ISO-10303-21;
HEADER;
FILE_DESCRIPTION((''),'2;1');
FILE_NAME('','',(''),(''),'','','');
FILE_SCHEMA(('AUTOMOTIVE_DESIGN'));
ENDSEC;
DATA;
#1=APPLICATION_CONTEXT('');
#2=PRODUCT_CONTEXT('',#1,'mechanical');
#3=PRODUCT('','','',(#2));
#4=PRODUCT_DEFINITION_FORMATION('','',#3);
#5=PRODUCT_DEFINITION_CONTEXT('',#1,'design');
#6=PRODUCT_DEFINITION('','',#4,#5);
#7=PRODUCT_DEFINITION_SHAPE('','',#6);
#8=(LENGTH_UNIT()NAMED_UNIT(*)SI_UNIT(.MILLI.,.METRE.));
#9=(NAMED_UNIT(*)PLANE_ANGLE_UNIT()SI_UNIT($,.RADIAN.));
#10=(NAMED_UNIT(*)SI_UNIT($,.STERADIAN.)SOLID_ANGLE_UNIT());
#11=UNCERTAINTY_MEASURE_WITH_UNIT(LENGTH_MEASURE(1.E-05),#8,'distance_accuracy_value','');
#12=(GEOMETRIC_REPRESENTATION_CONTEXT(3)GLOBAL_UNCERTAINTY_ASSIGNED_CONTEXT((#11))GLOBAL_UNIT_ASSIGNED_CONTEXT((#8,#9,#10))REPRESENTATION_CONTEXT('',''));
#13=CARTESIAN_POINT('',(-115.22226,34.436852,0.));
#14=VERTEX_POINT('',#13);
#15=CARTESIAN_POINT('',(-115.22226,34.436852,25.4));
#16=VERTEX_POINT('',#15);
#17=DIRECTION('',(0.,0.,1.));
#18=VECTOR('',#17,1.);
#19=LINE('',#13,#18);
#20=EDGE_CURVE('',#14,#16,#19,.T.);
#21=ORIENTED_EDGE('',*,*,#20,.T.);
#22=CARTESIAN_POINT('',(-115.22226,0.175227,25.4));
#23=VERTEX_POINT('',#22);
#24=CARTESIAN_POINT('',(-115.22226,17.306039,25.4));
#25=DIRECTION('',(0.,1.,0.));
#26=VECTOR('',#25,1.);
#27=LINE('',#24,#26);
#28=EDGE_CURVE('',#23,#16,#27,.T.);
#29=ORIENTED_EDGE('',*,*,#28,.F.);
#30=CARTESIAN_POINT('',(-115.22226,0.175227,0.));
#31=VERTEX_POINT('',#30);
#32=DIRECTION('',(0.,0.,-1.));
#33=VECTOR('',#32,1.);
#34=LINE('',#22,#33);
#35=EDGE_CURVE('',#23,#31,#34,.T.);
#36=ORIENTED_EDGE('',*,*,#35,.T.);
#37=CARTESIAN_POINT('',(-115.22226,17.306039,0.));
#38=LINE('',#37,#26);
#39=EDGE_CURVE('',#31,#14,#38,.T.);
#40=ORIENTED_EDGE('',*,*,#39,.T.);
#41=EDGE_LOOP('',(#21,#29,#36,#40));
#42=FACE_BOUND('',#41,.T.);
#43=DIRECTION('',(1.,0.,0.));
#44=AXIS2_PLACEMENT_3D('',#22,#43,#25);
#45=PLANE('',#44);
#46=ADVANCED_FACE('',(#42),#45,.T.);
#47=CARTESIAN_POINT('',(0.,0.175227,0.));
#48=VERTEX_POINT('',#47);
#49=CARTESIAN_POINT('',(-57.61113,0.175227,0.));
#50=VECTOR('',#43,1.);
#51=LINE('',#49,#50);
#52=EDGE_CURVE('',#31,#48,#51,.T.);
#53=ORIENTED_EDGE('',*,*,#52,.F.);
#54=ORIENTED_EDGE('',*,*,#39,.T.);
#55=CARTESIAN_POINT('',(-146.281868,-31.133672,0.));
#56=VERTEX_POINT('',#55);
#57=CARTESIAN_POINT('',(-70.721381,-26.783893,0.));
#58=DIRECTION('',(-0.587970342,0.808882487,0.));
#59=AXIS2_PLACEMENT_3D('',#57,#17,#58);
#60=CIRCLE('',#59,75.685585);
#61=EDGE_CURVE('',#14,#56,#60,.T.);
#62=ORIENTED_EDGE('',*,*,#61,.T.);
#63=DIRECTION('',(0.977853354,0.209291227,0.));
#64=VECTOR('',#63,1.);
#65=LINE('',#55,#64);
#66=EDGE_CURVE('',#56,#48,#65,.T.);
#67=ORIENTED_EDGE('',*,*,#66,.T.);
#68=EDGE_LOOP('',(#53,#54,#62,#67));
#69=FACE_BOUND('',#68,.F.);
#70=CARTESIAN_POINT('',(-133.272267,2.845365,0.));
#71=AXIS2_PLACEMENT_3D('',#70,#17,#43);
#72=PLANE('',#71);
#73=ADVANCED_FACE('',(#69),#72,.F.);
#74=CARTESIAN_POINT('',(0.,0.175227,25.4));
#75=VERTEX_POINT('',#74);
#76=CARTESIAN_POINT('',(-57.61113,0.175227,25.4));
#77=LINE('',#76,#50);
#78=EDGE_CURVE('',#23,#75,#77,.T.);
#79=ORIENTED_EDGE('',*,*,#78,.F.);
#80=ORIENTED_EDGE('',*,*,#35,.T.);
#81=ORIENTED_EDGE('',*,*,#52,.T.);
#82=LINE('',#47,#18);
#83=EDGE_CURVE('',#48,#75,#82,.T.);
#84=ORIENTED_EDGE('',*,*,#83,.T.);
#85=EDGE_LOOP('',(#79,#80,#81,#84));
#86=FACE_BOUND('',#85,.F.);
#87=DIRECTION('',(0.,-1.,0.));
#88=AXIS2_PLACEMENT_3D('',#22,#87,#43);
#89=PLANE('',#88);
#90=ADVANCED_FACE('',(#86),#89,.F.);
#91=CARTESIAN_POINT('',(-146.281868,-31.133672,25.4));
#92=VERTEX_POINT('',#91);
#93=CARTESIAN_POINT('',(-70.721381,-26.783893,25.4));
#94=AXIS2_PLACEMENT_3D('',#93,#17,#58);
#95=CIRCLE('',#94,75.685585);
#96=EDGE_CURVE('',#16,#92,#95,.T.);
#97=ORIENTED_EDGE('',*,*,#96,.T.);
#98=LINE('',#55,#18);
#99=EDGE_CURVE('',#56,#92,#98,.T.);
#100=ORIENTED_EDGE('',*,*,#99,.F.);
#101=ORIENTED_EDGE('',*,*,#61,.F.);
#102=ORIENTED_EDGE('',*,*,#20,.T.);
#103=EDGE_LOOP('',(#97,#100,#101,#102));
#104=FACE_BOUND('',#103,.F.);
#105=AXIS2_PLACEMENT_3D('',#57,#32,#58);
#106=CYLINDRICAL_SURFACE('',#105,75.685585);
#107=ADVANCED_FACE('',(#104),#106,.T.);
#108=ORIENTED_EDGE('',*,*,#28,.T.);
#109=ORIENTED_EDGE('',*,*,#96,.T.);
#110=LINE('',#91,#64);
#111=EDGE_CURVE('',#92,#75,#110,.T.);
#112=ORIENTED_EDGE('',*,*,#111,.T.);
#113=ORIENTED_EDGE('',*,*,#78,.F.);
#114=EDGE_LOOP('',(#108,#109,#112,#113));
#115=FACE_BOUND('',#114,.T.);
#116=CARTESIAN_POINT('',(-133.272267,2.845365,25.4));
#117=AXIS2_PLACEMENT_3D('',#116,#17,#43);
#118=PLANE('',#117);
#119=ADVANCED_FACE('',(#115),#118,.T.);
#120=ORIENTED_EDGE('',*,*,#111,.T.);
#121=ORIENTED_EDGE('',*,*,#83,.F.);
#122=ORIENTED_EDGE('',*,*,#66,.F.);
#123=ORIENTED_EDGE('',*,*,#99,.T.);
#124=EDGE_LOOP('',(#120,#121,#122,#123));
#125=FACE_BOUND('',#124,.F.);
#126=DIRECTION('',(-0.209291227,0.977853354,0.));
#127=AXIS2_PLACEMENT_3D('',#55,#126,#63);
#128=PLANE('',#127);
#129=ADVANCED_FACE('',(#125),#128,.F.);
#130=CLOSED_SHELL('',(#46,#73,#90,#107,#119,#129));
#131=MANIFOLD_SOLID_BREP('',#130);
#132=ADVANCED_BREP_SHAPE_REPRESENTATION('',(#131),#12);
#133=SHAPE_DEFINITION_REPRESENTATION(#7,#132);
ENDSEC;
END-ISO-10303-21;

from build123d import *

# Parameters (mm, degrees)
F1_DEPTH = 25.4
F2_W     = 115.2222603559
F2_H     = 34.2616252165
F3_DEPTH = 25.4


# Not quite as in the source:
# - a feature of the source that left no trace in its solid (it failed there, or was rolled back) is left out


with BuildPart() as f1:
    # F0 (on Top) → F1 (new body)
    with BuildSketch(Plane.XY):
        with BuildLine():
            ThreePointArc((-115.2222603559, 34.4368517399), (-139.1213542265, 5.6159757036), (-146.2818682194, -31.1336722225))
            Line((-146.2818682194, -31.1336722225), (-115.2222603559, 34.4368517399))
        make_face()
        Polygon((-115.2222603559, 34.4368517399), (-146.2818682194, -31.1336722225), (0, 0.1752265234), align=None)
    extrude(amount=F1_DEPTH)

    # F2 (on face) → F3 (cut)
    with BuildSketch(Plane.XY.offset(25.4)):
        with Locations((-57.611130178, 17.3060391317)):
            Rectangle(F2_W, F2_H)
    extrude(amount=-F3_DEPTH, mode=Mode.SUBTRACT)


solid = f1.part
